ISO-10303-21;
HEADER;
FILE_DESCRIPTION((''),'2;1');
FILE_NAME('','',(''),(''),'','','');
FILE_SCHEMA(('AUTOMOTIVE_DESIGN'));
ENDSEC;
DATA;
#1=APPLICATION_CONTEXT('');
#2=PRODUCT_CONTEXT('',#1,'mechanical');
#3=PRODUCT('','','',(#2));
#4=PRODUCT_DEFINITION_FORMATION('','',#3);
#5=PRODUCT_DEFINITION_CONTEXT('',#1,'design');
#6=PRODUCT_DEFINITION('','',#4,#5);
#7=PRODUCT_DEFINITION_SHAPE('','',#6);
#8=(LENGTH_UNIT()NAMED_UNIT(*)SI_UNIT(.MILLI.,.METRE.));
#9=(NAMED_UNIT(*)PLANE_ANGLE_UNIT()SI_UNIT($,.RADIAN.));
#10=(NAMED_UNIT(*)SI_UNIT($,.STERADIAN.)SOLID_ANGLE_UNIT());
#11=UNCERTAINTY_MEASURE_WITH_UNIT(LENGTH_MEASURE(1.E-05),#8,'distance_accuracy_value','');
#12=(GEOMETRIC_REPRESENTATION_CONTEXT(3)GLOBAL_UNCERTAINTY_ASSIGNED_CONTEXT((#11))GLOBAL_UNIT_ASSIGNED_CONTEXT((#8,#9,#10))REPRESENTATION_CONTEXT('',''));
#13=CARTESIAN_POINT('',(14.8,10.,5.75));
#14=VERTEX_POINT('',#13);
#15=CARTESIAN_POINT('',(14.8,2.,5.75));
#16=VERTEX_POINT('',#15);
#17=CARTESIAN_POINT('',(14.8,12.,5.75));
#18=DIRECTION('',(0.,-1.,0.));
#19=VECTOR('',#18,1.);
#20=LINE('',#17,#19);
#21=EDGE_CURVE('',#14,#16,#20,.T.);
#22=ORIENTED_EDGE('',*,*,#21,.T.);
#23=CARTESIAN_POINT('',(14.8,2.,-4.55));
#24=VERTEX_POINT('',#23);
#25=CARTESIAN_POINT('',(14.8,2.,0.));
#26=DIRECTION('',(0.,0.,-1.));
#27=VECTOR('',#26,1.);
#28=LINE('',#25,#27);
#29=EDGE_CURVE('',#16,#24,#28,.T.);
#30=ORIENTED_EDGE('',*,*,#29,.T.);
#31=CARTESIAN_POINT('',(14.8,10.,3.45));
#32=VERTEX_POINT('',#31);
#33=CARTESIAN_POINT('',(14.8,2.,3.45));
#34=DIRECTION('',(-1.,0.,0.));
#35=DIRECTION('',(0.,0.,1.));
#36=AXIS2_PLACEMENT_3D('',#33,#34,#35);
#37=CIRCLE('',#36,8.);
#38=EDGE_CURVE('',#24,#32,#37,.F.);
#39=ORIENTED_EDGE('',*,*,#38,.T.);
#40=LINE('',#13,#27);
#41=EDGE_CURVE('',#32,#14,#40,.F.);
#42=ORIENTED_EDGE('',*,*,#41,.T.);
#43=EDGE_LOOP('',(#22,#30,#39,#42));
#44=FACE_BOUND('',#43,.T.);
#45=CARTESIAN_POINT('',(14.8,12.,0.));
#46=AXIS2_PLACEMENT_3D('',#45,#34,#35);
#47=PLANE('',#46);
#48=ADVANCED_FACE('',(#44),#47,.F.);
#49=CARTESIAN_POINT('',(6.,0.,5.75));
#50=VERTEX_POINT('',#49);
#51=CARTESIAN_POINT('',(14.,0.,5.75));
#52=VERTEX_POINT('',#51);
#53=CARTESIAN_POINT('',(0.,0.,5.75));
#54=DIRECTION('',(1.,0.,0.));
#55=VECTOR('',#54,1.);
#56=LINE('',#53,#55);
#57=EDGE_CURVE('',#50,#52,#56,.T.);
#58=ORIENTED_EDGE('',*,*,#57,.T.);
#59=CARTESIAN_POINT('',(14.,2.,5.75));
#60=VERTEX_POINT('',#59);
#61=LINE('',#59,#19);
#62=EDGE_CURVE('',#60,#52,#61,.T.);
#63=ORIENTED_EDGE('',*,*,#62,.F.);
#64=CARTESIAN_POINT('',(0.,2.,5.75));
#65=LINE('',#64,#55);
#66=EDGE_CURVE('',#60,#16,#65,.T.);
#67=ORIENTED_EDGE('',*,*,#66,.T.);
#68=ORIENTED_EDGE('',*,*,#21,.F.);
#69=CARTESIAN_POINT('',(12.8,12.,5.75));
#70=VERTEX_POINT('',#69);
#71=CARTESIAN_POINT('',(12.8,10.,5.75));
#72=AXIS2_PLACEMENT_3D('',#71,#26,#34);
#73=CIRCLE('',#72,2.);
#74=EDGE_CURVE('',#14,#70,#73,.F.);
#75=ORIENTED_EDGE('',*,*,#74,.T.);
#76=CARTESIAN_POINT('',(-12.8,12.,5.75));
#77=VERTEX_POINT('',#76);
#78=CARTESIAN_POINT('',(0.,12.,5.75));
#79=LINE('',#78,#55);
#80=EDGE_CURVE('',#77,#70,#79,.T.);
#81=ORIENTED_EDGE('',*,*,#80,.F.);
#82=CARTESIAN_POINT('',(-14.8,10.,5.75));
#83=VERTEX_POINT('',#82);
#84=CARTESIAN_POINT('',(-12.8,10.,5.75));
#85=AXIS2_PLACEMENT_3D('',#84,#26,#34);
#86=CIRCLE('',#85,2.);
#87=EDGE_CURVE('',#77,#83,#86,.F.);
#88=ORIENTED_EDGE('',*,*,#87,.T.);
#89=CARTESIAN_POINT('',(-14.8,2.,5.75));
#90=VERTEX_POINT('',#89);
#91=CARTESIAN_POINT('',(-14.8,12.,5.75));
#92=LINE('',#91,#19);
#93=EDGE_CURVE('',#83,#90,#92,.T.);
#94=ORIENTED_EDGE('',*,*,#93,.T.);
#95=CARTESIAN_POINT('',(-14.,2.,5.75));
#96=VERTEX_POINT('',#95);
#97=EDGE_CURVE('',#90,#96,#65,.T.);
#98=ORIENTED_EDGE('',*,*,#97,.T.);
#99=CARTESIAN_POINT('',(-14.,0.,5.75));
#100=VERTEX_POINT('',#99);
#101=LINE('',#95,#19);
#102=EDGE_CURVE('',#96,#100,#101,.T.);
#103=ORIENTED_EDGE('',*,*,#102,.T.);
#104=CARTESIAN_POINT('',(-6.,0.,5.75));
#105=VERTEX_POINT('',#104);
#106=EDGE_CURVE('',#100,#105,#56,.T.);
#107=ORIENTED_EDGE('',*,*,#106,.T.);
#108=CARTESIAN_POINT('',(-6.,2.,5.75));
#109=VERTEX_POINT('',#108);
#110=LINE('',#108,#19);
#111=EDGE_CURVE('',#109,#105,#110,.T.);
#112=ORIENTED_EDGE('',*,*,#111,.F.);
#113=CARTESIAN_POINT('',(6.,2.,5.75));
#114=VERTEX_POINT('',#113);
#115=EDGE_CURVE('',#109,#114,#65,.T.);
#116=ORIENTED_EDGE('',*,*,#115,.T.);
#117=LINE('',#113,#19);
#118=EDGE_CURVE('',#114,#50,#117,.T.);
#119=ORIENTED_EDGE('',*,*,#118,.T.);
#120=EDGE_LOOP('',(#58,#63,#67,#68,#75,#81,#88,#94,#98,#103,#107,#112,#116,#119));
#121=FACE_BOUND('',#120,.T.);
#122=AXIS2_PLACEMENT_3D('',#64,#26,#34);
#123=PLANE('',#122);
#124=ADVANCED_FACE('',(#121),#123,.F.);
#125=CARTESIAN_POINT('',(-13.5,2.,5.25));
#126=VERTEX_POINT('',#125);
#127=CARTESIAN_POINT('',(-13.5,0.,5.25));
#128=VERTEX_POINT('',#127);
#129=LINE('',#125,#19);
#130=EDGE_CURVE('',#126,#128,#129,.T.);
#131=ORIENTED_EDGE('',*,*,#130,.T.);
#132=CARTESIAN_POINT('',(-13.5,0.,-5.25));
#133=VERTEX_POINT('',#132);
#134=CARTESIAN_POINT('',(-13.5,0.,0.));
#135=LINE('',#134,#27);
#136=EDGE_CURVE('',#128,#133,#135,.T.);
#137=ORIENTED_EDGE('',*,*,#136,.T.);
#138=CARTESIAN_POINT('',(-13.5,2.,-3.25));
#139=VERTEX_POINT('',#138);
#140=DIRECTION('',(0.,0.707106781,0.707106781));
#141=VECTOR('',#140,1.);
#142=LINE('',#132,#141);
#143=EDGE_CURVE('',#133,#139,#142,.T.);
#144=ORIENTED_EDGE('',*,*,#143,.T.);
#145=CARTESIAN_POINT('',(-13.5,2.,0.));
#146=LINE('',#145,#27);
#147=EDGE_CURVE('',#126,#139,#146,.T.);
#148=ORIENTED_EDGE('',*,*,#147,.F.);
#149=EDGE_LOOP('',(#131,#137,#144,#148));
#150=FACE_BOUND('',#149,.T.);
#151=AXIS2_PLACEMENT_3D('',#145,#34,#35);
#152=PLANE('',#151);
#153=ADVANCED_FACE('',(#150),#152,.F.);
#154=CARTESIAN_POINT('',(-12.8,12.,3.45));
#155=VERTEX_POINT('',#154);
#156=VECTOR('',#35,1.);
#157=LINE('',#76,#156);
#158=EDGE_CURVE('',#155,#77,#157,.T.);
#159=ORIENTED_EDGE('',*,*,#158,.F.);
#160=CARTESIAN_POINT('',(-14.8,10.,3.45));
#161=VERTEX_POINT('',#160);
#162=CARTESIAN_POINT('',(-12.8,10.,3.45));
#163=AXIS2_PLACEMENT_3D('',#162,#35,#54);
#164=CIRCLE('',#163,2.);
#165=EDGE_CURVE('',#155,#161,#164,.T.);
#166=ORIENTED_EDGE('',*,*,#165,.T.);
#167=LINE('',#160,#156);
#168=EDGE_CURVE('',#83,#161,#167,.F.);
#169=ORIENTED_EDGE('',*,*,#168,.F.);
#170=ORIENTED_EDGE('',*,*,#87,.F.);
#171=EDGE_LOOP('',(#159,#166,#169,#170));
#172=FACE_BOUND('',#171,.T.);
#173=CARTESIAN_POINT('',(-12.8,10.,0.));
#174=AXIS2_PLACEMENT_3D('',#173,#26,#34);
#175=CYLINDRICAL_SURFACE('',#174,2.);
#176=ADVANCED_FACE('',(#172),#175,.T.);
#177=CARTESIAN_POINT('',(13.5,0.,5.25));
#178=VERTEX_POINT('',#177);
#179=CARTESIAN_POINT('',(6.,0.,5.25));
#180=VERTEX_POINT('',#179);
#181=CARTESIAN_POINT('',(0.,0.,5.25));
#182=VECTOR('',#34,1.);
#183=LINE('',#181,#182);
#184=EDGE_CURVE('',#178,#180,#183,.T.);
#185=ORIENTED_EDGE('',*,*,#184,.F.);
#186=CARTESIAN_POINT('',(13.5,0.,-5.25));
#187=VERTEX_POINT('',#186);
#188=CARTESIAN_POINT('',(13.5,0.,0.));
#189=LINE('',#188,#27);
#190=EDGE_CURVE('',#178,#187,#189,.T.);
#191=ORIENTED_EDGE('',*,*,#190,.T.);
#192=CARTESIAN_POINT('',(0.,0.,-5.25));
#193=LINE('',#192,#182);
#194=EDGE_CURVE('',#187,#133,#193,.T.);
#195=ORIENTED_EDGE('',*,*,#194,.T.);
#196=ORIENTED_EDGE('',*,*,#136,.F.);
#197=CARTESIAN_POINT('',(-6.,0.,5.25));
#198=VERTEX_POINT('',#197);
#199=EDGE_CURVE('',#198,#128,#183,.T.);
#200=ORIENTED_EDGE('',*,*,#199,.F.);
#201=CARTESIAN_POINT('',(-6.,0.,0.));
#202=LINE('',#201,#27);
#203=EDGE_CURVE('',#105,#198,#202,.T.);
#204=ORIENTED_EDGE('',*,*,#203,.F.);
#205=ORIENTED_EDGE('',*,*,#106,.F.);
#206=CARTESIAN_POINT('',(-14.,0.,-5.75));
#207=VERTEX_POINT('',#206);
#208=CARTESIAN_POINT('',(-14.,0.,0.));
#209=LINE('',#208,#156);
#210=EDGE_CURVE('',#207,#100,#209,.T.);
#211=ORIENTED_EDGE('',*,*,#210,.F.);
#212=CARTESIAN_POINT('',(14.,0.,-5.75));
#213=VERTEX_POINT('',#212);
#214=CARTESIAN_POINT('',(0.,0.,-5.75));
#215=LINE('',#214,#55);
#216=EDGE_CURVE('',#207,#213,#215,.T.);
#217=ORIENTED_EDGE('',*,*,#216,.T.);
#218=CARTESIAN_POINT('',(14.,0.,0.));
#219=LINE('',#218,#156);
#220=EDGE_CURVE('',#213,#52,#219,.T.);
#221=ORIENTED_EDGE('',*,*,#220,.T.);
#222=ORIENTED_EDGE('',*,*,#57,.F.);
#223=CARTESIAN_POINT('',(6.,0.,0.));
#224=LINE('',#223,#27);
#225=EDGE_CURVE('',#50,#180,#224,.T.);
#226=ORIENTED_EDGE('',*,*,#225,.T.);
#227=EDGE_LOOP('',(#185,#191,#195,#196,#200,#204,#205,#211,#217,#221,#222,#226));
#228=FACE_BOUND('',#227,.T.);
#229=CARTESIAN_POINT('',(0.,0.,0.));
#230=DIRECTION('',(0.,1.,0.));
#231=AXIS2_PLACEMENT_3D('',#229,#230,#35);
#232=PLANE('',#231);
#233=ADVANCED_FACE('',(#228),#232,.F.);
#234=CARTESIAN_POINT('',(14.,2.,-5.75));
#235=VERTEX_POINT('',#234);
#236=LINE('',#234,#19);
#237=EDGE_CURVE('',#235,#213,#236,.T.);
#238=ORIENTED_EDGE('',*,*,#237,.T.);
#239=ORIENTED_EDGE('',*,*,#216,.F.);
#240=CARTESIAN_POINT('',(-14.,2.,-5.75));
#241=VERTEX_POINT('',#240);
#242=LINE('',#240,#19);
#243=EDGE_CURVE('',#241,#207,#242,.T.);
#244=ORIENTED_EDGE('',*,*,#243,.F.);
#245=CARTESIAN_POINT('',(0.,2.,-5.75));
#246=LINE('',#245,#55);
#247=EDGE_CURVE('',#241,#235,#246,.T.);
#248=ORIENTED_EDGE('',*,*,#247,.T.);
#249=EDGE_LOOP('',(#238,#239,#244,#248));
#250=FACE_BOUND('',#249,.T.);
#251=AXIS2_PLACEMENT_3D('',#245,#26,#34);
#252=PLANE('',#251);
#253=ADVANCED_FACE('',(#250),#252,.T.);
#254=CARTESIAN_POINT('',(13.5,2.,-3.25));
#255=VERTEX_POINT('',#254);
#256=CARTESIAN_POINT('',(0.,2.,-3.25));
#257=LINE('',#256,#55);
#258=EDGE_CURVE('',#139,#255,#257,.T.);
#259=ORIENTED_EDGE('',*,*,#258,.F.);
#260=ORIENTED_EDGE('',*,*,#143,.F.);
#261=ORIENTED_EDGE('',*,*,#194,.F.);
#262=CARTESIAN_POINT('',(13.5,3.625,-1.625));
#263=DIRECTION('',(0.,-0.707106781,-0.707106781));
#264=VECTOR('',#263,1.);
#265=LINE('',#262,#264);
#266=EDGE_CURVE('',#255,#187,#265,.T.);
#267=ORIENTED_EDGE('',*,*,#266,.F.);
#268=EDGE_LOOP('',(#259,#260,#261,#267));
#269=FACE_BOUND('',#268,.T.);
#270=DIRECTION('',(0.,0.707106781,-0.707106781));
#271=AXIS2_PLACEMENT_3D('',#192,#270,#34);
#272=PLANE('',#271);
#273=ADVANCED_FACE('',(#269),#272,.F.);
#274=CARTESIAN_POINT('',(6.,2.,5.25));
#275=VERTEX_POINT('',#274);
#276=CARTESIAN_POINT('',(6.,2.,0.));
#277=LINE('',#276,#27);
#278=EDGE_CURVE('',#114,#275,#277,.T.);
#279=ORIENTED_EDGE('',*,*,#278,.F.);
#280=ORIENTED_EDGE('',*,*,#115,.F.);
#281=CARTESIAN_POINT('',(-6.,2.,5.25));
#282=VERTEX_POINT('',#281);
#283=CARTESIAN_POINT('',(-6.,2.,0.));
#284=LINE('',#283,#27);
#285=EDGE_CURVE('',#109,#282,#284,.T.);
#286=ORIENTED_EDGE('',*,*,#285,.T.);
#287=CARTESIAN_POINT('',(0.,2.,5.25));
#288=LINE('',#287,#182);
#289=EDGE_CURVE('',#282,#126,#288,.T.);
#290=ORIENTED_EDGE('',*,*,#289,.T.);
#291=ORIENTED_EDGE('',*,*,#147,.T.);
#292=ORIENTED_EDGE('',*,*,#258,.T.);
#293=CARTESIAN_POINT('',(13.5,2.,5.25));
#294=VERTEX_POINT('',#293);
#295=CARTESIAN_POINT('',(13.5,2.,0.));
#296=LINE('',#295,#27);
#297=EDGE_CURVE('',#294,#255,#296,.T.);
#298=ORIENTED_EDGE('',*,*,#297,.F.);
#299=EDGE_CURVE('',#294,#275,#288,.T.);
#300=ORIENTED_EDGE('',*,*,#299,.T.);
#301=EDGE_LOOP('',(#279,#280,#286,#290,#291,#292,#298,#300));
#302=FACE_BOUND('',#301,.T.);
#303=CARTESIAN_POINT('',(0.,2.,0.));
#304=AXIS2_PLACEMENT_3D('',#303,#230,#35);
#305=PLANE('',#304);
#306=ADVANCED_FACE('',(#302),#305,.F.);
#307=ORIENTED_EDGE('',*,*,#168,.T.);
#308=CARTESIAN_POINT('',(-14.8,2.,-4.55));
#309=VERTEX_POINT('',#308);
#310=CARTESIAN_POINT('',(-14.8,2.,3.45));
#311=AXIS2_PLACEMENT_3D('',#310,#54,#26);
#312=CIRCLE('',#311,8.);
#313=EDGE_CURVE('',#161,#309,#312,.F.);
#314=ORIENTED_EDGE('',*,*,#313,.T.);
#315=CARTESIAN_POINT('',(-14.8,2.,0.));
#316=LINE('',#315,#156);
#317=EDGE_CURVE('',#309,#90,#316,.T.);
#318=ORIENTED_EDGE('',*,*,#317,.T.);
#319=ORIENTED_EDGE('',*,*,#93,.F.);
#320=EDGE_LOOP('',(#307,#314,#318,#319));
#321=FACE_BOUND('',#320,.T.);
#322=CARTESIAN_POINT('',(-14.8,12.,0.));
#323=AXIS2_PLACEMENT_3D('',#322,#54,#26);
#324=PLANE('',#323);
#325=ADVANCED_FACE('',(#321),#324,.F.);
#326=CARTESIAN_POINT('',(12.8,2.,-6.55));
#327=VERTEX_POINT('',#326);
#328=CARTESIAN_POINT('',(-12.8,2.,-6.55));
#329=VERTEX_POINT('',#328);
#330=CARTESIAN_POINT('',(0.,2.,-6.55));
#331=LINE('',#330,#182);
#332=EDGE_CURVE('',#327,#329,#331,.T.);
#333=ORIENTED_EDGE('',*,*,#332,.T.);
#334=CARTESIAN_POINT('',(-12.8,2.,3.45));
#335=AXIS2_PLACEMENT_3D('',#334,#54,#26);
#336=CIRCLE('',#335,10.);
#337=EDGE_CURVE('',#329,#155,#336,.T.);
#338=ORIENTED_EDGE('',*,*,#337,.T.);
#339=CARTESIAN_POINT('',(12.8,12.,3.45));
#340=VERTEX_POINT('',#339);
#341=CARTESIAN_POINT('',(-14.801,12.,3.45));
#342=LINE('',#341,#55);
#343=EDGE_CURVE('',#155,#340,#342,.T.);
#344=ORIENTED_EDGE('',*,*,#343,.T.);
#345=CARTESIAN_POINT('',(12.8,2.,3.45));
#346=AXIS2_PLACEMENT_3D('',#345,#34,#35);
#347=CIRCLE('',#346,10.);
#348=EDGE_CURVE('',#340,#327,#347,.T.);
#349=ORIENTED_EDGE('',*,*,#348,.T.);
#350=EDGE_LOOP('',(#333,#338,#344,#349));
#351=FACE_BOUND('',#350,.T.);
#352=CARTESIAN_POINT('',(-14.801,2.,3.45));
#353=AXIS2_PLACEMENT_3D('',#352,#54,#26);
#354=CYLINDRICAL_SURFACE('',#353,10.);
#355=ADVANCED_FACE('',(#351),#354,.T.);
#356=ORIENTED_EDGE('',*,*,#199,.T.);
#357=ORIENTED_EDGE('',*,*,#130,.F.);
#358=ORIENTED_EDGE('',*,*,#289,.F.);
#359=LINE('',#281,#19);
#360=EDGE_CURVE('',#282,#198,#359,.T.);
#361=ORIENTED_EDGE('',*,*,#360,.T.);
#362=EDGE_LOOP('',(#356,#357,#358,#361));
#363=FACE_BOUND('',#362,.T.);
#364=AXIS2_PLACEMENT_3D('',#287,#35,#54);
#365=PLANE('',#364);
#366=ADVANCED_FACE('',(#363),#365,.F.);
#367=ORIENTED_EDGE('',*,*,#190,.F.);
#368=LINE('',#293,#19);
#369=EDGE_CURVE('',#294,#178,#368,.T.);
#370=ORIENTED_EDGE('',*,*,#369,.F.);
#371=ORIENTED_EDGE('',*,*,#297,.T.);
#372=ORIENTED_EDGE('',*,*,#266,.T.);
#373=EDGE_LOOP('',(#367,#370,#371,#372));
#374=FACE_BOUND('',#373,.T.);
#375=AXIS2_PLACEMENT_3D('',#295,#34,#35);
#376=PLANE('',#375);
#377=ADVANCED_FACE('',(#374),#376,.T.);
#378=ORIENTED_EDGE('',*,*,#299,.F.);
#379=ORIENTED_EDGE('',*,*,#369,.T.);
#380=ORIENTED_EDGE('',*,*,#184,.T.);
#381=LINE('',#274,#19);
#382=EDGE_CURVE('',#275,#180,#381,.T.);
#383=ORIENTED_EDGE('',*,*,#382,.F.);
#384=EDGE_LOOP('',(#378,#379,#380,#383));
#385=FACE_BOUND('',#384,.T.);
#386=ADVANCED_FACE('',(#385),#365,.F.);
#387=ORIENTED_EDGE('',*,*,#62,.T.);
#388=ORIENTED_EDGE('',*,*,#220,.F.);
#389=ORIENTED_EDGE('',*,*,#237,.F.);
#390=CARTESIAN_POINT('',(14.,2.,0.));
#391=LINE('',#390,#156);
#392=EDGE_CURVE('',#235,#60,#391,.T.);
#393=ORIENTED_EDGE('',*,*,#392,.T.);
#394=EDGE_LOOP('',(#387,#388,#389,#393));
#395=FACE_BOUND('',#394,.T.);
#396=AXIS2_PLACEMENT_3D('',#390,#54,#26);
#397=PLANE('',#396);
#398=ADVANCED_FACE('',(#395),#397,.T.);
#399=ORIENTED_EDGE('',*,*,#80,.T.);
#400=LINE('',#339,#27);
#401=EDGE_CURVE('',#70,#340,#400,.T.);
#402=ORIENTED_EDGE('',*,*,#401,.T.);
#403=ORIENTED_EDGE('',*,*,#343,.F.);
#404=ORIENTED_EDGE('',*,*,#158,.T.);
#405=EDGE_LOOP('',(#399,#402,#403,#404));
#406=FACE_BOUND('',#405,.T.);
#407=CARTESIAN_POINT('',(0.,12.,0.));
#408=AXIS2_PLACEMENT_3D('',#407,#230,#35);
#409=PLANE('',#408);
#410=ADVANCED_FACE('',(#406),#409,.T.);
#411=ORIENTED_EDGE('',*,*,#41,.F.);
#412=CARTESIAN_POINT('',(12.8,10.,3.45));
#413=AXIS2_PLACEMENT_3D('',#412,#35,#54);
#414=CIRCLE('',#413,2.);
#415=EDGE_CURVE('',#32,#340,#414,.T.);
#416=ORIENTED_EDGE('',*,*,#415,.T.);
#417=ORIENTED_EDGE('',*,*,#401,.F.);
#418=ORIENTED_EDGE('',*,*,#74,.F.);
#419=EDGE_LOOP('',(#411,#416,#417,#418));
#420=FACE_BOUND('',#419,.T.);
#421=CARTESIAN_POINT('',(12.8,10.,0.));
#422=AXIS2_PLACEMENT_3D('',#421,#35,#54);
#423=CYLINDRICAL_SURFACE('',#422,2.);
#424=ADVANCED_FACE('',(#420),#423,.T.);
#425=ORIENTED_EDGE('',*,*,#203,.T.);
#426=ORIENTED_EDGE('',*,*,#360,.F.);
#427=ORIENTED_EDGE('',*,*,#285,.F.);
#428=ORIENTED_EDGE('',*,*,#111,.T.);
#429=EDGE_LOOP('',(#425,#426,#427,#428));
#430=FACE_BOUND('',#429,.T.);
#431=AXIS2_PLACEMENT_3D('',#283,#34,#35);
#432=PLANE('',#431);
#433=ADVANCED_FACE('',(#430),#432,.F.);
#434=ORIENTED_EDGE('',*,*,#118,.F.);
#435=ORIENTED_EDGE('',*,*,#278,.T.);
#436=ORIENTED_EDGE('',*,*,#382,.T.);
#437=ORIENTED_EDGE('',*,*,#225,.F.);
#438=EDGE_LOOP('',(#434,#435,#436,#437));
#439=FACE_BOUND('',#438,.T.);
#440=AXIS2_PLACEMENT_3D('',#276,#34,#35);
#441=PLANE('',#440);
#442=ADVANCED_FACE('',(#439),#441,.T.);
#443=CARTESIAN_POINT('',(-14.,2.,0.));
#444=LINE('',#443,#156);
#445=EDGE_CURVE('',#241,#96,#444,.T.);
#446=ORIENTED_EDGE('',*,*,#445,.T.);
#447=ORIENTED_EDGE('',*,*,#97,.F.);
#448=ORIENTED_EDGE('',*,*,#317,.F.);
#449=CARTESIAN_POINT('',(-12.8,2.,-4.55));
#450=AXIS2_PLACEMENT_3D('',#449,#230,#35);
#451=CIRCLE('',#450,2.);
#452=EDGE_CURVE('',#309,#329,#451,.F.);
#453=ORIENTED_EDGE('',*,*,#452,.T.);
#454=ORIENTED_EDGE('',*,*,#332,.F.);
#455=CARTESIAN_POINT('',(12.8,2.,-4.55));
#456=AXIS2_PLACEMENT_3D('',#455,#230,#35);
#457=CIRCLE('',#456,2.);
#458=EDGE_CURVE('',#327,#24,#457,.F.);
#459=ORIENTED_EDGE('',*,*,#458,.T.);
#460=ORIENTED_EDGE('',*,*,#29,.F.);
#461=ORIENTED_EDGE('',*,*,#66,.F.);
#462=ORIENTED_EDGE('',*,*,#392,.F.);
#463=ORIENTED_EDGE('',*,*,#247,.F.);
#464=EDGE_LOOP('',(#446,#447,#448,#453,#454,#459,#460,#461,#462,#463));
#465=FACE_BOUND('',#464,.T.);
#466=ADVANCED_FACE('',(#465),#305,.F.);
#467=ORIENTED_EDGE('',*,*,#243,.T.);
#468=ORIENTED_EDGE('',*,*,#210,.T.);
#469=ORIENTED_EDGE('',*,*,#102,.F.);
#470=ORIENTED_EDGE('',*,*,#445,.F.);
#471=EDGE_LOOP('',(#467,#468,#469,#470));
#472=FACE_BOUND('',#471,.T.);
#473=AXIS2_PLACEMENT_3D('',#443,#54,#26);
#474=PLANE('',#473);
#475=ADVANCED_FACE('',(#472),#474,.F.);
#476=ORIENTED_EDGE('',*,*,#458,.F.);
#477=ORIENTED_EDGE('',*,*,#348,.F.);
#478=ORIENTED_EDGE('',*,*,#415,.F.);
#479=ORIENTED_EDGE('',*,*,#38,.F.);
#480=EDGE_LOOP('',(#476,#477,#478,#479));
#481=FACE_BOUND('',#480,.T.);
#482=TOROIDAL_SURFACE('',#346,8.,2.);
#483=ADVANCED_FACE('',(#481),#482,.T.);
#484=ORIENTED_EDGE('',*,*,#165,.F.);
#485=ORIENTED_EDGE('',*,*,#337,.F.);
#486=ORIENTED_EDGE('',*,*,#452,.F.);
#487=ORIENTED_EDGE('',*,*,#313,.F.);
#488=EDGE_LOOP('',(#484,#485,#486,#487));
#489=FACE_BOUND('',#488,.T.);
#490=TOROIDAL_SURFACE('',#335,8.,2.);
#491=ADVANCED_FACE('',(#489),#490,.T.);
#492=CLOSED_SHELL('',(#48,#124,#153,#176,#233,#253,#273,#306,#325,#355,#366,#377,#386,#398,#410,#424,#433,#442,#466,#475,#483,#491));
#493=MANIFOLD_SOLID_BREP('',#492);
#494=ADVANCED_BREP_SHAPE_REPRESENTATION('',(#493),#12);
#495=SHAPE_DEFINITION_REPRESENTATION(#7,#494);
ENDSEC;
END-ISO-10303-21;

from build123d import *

# Parameters (mm, degrees)
BOSS_EXTRUDE1_DEPTH = 2
BOSS_EXTRUDE2_DEPTH = 10
CUT_EXTRUDE1_REACH  = 34.605
FILLET1_R           = 2
CHAMFER1_SIZE       = 2


with BuildPart() as part:
    # Sketch1 → Boss-Extrude1 (new body)
    with BuildSketch(Plane(origin=(0, 0, 0), x_dir=(1, 0, 0), z_dir=(0, 1, 0))):
        Polygon((14, 5.75), (-14, 5.75), (-14, -5.75), (-6, -5.75), (-6, -5.25), (-13.5, -5.25), (-13.5, 5.25), (13.5, 5.25), (13.5, -5.25), (6, -5.25), (6, -5.75), (14, -5.75), align=None)
    extrude(amount=BOSS_EXTRUDE1_DEPTH)

    # Sketch2 → Boss-Extrude2 (add)
    with BuildSketch(Plane(origin=(0, 2, 0), x_dir=(1, 0, 0), z_dir=(0, 1, 0))):
        Polygon((-14.8, 6.55), (-14.8, -5.75), (-14, -5.75), (-14, 5.75), (14, 5.75), (14, -5.75), (14.8, -5.75), (14.8, 6.55), align=None)
        Polygon((-14, 5.75), (-14, -5.75), (-6, -5.75), (-6, -5.25), (-13.5, -5.25), (-13.5, 5.25), (13.5, 5.25), (13.5, -5.25), (6, -5.25), (6, -5.75), (14, -5.75), (14, 5.75), align=None)
        Polygon((-6, -5.75), (-5.2, -5.75), (-5.2, -4.45), (-12.7, -4.45), (-12.7, 4.45), (12.7, 4.45), (12.7, -4.45), (5.2, -4.45), (5.2, -5.75), (6, -5.75), (6, -5.25), (13.5, -5.25), (13.5, 5.25), (-13.5, 5.25), (-13.5, -5.25), (-6, -5.25), align=None)
        Polygon((-5.2, -4.45), (-5.2, -5.75), (5.2, -5.75), (5.2, -4.45), (12.7, -4.45), (12.7, 4.45), (-12.7, 4.45), (-12.7, -4.45), align=None)
    extrude(amount=BOSS_EXTRUDE2_DEPTH)

    # Sketch3 → Cut-Extrude1 (cut, up to next)
    with BuildSketch(Plane(origin=(14.8, 0, 0), x_dir=(0, 0, -1), z_dir=(1, 0, 0)), mode=Mode.PRIVATE) as cut_extrude1_sk1:
        with BuildLine():
            Line((6.55, 12), (-3.45, 12))
            ThreePointArc((-3.45, 12), (3.621067812, 9.071067812), (6.55, 2))
            Line((6.55, 2), (6.55, 12))
        make_face()
    cut_extrude1_tool1 = extrude(cut_extrude1_sk1.sketch, amount=-CUT_EXTRUDE1_REACH, mode=Mode.PRIVATE) & part.part
    add(cut_extrude1_tool1.solids().sort_by_distance((14.8, 9.766321, -4.316321))[0], mode=Mode.SUBTRACT)

    # Fillet1
    fillet1_edges = [part.edges().sort_by_distance(p)[0] for p in [
        (14.8, 12, 4.6),
        (-14.8, 12, 4.6),
        (14.8, 9.071067812, -3.621067812),
        (-14.8, 9.071067812, -3.621067812),
    ]]
    fillet(fillet1_edges, radius=FILLET1_R)

    # Chamfer1
    chamfer1_edges = [part.edges().sort_by_distance(p)[0] for p in [
        (0, 2, -5.25),
    ]]
    chamfer(chamfer1_edges, length=CHAMFER1_SIZE - 0.0001)  # a hair under: the kernel refuses the full size


solid = part.part
